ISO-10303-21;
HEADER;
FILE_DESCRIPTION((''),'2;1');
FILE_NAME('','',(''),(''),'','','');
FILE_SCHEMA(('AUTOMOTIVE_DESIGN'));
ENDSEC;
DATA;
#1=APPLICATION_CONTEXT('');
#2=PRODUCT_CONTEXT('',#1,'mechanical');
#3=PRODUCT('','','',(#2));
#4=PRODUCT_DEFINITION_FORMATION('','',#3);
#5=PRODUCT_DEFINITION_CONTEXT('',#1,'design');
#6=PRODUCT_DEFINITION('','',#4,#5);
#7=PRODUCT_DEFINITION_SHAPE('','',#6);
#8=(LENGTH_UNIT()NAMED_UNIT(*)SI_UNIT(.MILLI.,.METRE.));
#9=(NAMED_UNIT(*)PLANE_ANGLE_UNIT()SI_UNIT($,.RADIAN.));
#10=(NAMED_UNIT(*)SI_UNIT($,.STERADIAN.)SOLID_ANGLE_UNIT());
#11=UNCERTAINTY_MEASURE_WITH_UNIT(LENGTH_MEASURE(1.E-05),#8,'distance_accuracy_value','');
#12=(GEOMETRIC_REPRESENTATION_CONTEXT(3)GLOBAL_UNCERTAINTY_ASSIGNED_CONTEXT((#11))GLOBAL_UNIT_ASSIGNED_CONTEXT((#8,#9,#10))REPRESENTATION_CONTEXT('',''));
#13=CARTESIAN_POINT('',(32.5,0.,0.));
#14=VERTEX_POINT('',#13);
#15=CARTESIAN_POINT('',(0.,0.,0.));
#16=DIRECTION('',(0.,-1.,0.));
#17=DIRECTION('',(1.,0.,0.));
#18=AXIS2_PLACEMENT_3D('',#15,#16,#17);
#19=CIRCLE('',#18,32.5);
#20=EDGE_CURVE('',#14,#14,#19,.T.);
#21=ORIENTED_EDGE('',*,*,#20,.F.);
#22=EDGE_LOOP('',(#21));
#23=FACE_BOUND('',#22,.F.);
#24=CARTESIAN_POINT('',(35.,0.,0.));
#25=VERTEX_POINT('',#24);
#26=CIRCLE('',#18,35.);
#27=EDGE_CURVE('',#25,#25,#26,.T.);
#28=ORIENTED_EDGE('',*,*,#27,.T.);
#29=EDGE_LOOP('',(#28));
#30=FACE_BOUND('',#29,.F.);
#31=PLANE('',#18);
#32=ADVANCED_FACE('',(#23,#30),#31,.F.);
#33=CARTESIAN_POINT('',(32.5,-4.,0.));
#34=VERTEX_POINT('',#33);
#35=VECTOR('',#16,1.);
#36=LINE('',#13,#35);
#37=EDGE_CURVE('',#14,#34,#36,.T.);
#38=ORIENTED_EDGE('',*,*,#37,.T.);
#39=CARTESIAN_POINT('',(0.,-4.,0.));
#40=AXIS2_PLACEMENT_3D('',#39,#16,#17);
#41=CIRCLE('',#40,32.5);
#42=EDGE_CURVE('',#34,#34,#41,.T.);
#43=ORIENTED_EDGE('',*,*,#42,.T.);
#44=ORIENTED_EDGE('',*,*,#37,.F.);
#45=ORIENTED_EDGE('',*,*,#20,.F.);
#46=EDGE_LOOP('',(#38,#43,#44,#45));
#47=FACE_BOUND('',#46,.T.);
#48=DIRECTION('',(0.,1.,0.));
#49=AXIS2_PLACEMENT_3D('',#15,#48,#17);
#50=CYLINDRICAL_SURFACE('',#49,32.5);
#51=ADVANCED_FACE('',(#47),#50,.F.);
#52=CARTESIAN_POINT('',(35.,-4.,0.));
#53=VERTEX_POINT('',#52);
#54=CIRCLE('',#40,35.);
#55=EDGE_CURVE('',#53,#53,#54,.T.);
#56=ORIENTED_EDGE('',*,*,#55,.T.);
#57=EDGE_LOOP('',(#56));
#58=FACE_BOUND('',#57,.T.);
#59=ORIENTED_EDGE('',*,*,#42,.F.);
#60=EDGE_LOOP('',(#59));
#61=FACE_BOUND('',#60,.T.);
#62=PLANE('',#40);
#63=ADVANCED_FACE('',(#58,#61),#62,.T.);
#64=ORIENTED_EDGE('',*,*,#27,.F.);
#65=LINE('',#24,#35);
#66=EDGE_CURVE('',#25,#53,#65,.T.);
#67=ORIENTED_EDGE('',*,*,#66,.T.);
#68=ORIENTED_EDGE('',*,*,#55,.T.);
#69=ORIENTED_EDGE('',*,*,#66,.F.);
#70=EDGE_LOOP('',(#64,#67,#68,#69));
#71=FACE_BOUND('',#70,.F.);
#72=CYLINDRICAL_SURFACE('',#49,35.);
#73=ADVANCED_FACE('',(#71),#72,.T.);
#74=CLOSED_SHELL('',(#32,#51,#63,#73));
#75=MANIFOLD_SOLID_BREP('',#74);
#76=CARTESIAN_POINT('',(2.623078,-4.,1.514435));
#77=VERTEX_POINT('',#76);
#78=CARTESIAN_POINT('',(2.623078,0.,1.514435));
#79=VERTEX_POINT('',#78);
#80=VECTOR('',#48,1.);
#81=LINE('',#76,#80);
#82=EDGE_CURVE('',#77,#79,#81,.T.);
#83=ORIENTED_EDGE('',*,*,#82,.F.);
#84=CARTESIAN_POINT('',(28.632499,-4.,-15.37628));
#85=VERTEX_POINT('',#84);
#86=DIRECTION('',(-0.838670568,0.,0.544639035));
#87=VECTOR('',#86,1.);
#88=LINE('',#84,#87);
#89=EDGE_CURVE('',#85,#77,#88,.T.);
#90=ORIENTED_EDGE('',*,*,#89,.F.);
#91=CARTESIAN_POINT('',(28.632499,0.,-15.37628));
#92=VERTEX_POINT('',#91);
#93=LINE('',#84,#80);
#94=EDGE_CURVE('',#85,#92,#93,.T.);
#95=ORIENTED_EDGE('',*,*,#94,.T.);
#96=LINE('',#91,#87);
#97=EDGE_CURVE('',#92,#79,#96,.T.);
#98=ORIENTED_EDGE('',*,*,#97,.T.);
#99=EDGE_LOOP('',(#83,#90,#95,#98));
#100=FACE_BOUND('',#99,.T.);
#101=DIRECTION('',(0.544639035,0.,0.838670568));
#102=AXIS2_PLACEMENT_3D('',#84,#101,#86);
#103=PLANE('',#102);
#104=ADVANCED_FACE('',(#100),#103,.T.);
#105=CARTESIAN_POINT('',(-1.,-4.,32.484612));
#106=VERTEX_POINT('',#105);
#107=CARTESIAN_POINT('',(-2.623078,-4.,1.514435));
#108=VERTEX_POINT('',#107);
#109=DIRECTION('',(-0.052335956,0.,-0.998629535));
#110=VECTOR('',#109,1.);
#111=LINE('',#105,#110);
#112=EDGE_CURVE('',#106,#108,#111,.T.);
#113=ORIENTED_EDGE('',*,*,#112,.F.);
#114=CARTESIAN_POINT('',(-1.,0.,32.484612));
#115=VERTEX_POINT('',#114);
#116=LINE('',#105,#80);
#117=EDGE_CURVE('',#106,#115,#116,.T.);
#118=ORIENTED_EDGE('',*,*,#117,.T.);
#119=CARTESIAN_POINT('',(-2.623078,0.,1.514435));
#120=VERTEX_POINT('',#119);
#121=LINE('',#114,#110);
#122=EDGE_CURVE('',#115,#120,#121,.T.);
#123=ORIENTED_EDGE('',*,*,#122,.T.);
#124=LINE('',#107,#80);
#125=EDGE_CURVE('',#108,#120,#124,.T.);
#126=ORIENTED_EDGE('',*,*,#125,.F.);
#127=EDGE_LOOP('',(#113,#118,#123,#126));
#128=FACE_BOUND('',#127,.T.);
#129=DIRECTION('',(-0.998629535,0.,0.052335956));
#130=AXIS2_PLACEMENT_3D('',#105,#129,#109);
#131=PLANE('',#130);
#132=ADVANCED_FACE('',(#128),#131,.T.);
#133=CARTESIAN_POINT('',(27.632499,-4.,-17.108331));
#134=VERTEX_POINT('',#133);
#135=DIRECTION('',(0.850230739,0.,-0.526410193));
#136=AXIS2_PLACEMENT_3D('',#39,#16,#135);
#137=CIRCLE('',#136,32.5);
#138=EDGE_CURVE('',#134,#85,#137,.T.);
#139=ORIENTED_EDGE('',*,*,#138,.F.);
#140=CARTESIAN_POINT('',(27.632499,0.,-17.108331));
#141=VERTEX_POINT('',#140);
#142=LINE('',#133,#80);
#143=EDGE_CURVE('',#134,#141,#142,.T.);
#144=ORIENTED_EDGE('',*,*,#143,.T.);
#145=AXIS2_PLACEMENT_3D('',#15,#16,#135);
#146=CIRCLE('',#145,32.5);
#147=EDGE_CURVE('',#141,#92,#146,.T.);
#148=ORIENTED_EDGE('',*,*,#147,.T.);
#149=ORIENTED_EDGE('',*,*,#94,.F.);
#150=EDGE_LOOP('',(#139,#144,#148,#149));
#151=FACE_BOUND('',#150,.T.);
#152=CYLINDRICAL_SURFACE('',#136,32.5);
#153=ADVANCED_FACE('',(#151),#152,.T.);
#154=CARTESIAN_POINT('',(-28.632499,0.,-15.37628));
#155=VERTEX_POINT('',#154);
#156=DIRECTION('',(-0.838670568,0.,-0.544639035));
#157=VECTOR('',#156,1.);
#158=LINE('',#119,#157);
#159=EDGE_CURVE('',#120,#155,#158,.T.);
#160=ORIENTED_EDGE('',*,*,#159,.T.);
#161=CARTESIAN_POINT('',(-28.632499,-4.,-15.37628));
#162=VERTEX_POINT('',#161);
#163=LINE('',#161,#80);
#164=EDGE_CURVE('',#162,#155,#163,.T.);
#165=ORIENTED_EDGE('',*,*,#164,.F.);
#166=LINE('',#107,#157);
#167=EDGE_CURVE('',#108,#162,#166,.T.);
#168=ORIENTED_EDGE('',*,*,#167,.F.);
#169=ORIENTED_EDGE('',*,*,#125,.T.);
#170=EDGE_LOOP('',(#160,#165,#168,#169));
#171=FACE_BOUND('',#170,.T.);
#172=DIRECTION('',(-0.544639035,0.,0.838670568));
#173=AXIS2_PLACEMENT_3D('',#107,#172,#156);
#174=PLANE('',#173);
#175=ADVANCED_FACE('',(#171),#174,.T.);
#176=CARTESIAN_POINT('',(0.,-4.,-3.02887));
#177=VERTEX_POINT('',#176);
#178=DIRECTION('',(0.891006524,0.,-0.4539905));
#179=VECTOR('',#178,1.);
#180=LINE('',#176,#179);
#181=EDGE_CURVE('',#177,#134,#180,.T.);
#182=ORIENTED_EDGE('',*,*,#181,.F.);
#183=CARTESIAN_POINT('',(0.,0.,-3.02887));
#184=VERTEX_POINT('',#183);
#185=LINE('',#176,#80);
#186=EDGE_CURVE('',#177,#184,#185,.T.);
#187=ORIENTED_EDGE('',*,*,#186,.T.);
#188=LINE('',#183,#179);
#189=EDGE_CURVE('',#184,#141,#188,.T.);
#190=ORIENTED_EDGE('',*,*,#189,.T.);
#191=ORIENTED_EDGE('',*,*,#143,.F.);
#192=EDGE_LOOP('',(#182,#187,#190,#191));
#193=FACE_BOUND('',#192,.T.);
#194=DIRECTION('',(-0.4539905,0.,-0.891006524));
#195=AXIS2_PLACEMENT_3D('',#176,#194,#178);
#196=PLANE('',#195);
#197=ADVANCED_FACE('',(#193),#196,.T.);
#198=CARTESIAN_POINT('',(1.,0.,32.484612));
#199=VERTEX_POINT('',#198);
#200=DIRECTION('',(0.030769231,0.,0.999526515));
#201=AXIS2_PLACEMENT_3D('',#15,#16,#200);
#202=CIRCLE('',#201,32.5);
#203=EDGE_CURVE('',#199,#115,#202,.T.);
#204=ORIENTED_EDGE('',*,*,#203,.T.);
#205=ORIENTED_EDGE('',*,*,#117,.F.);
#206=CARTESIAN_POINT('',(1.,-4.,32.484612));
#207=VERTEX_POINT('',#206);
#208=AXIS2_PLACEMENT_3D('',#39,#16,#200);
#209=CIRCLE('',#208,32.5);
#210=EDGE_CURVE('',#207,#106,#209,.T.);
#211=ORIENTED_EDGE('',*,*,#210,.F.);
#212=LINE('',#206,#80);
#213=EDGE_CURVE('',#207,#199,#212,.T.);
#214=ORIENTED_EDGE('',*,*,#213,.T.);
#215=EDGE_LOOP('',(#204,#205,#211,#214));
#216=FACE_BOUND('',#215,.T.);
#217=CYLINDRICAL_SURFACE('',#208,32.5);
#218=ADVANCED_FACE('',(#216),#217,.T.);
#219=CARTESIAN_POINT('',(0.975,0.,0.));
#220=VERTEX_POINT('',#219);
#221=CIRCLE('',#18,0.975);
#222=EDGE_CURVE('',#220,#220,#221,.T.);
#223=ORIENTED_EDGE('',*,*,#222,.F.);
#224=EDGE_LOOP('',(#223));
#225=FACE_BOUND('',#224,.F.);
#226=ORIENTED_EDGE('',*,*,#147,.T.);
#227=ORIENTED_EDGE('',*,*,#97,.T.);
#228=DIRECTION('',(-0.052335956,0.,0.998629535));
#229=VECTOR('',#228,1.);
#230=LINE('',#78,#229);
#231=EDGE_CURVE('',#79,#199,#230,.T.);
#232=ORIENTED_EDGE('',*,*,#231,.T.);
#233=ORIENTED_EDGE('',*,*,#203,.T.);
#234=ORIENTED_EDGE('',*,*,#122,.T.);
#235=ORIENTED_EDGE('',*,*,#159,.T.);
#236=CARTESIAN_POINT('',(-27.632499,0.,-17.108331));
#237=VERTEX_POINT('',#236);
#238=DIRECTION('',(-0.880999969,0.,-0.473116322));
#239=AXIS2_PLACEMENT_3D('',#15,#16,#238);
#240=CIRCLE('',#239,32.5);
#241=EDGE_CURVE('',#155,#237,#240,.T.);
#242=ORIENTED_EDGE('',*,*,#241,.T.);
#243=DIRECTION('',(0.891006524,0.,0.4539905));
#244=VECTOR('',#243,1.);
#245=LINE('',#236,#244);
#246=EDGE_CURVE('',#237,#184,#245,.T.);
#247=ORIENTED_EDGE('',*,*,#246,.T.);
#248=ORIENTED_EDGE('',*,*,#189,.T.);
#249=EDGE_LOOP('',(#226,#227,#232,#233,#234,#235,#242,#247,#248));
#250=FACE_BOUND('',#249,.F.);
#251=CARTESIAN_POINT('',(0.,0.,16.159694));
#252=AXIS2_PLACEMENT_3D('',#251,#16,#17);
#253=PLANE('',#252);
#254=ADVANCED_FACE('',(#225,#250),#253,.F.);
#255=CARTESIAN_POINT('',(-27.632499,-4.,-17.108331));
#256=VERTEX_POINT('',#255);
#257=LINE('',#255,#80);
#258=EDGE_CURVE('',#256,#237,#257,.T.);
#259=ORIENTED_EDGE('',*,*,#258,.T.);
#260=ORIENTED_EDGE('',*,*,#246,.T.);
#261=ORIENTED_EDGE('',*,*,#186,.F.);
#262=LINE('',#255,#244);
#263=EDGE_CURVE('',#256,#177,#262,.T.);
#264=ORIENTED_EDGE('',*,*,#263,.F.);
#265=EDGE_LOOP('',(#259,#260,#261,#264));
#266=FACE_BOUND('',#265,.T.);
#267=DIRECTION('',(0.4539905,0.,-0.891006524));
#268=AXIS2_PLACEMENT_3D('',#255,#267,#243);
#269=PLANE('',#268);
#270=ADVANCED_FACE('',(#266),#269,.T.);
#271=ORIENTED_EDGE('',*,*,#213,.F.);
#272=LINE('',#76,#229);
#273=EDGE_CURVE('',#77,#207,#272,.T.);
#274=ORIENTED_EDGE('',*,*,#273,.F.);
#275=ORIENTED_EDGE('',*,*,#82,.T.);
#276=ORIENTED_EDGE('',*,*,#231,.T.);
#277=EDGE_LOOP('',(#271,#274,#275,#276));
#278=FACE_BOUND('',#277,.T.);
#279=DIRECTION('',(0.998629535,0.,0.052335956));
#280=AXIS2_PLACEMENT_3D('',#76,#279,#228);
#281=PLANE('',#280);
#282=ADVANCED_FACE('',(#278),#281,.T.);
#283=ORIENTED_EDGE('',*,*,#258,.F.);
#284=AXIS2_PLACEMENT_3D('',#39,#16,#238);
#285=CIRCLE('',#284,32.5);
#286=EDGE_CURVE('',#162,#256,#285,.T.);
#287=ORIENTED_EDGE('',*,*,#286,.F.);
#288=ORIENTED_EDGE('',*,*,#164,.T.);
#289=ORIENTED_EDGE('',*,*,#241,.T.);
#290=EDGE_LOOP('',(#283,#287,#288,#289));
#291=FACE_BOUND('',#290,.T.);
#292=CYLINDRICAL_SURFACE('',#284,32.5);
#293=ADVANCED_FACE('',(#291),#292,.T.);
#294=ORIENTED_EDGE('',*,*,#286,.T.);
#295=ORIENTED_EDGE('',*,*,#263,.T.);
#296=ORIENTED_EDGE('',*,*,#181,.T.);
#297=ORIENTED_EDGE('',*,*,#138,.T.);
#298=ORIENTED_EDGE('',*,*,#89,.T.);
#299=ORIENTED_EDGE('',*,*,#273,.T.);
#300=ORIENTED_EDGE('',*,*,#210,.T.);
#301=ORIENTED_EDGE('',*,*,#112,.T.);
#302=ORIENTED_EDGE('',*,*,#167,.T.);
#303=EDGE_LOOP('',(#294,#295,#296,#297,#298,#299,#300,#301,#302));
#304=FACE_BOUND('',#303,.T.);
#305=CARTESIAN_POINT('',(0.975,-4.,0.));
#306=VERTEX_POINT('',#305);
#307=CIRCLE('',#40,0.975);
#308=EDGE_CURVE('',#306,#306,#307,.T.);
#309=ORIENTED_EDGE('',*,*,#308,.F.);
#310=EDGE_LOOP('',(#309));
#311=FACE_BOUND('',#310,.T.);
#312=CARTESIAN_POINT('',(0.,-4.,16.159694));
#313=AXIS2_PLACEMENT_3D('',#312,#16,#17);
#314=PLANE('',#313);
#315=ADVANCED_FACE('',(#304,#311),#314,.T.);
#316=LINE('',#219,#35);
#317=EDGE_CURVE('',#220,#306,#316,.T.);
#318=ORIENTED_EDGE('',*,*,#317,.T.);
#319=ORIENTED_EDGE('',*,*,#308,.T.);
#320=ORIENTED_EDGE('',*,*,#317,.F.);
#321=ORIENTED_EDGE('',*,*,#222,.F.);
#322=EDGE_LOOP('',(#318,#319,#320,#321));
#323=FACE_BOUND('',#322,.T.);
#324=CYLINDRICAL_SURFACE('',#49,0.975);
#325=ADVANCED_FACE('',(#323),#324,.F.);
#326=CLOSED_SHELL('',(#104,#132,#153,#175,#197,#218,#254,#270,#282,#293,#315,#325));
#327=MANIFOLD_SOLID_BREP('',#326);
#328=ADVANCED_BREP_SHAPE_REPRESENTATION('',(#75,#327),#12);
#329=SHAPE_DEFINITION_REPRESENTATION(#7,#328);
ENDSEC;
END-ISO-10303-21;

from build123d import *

# Parameters (mm, degrees)
F0_R     = 35
F0_R_2   = 32.5
F1_DEPTH = 4
F0_R_3   = 2.975
F0_R_4   = 0.975
F3_DEPTH = 4


with BuildPart() as f1:
    # F0 (on Front) → F1 (new body)
    with BuildSketch(Plane.XZ):
        Circle(F0_R)
        Circle(F0_R_2, mode=Mode.SUBTRACT)
    extrude(amount=F1_DEPTH)

    # F4 (on Right) → F5 (revolve, cut)
    with BuildSketch(Plane.YZ):
        Polygon((0, 32.5291901827), (2.1413064096, 1.5684039099), (5.6291026995, 1.5684039099), (5.6291026995, 33.8882990181), (0, 33.8882990181), align=None)
    revolve(axis=Axis((0, 0.7535219193, 0), (0, 1, 0)), mode=Mode.SUBTRACT)


with BuildPart() as f1b:
    # F0 (on Front) → F1, piece 2 (new body)
    with BuildSketch(Plane.XZ):
        Circle(F0_R_3)
        Circle(F0_R_4, mode=Mode.SUBTRACT)
    extrude(amount=F1_DEPTH)

    # F2 (on face) → F3 (join)
    with BuildSketch(Plane.XZ.offset(4)):
        with BuildLine():
            Line((2.6230781922, 1.5144349004), (1, 32.4846117416))
            ThreePointArc((1, 32.4846117416), (0, 32.5), (-1, 32.4846117416))
            Line((-1, 32.4846117416), (-2.6230781922, 1.5144349004))
            Line((-2.6230781922, 1.5144349004), (-2.5198255703, 1.5814879371))
            ThreePointArc((-2.5198255703, 1.5814879371), (0, 2.975), (2.5198255703, 1.5814879371))
            Line((2.5198255703, 1.5814879371), (2.6230781922, 1.5144349004))
        make_face()
        with BuildLine():
            Line((28.6324990003, -15.376280467), (2.6230781922, 1.5144349004))
            Line((2.6230781922, 1.5144349004), (2.6295215145, 1.3914889884))
            ThreePointArc((2.6295215145, 1.3914889884), (2.8873388704, 0.7168676637), (2.975, 0))
            ThreePointArc((2.975, 0), (2.1420749793, -2.0644950431), (0.1096959442, -2.9729769255))
            Line((0.1096959442, -2.9729769255), (0, -3.0288698008))
            Line((0, -3.0288698008), (27.6324990003, -17.1083312746))
            ThreePointArc((27.6324990003, -17.1083312746), (28.145825623, -16.25), (28.6324990003, -15.376280467))
        make_face()
        with BuildLine():
            Line((2.6295215145, 1.3914889884), (2.6230781922, 1.5144349004))
            Line((2.6230781922, 1.5144349004), (2.5198255703, 1.5814879371))
            ThreePointArc((2.5198255703, 1.5814879371), (2.5764255763, 1.4875), (2.6295215145, 1.3914889884))
        make_face()
        with BuildLine():
            Line((-2.5198255703, 1.5814879371), (-2.6230781922, 1.5144349004))
            Line((-2.6230781922, 1.5144349004), (-2.6295215145, 1.3914889884))
            ThreePointArc((-2.6295215145, 1.3914889884), (-2.5764255763, 1.4875), (-2.5198255703, 1.5814879371))
        make_face()
        with BuildLine():
            Line((-2.6295215145, 1.3914889884), (-2.6230781922, 1.5144349004))
            Line((-2.6230781922, 1.5144349004), (-28.6324990003, -15.376280467))
            ThreePointArc((-28.6324990003, -15.376280467), (-28.145825623, -16.25), (-27.6324990003, -17.1083312746))
            Line((-27.6324990003, -17.1083312746), (0, -3.0288698008))
            Line((0, -3.0288698008), (-0.1096959442, -2.9729769255))
            ThreePointArc((-0.1096959442, -2.9729769255), (-2.5764255763, -1.4875), (-2.6295215145, 1.3914889884))
        make_face()
        with BuildLine():
            Line((0, -3.0288698008), (0.1096959442, -2.9729769255))
            ThreePointArc((0.1096959442, -2.9729769255), (0, -2.975), (-0.1096959442, -2.9729769255))
            Line((-0.1096959442, -2.9729769255), (0, -3.0288698008))
        make_face()
    extrude(amount=-F3_DEPTH)


solid = Compound([f1.part, f1b.part])
